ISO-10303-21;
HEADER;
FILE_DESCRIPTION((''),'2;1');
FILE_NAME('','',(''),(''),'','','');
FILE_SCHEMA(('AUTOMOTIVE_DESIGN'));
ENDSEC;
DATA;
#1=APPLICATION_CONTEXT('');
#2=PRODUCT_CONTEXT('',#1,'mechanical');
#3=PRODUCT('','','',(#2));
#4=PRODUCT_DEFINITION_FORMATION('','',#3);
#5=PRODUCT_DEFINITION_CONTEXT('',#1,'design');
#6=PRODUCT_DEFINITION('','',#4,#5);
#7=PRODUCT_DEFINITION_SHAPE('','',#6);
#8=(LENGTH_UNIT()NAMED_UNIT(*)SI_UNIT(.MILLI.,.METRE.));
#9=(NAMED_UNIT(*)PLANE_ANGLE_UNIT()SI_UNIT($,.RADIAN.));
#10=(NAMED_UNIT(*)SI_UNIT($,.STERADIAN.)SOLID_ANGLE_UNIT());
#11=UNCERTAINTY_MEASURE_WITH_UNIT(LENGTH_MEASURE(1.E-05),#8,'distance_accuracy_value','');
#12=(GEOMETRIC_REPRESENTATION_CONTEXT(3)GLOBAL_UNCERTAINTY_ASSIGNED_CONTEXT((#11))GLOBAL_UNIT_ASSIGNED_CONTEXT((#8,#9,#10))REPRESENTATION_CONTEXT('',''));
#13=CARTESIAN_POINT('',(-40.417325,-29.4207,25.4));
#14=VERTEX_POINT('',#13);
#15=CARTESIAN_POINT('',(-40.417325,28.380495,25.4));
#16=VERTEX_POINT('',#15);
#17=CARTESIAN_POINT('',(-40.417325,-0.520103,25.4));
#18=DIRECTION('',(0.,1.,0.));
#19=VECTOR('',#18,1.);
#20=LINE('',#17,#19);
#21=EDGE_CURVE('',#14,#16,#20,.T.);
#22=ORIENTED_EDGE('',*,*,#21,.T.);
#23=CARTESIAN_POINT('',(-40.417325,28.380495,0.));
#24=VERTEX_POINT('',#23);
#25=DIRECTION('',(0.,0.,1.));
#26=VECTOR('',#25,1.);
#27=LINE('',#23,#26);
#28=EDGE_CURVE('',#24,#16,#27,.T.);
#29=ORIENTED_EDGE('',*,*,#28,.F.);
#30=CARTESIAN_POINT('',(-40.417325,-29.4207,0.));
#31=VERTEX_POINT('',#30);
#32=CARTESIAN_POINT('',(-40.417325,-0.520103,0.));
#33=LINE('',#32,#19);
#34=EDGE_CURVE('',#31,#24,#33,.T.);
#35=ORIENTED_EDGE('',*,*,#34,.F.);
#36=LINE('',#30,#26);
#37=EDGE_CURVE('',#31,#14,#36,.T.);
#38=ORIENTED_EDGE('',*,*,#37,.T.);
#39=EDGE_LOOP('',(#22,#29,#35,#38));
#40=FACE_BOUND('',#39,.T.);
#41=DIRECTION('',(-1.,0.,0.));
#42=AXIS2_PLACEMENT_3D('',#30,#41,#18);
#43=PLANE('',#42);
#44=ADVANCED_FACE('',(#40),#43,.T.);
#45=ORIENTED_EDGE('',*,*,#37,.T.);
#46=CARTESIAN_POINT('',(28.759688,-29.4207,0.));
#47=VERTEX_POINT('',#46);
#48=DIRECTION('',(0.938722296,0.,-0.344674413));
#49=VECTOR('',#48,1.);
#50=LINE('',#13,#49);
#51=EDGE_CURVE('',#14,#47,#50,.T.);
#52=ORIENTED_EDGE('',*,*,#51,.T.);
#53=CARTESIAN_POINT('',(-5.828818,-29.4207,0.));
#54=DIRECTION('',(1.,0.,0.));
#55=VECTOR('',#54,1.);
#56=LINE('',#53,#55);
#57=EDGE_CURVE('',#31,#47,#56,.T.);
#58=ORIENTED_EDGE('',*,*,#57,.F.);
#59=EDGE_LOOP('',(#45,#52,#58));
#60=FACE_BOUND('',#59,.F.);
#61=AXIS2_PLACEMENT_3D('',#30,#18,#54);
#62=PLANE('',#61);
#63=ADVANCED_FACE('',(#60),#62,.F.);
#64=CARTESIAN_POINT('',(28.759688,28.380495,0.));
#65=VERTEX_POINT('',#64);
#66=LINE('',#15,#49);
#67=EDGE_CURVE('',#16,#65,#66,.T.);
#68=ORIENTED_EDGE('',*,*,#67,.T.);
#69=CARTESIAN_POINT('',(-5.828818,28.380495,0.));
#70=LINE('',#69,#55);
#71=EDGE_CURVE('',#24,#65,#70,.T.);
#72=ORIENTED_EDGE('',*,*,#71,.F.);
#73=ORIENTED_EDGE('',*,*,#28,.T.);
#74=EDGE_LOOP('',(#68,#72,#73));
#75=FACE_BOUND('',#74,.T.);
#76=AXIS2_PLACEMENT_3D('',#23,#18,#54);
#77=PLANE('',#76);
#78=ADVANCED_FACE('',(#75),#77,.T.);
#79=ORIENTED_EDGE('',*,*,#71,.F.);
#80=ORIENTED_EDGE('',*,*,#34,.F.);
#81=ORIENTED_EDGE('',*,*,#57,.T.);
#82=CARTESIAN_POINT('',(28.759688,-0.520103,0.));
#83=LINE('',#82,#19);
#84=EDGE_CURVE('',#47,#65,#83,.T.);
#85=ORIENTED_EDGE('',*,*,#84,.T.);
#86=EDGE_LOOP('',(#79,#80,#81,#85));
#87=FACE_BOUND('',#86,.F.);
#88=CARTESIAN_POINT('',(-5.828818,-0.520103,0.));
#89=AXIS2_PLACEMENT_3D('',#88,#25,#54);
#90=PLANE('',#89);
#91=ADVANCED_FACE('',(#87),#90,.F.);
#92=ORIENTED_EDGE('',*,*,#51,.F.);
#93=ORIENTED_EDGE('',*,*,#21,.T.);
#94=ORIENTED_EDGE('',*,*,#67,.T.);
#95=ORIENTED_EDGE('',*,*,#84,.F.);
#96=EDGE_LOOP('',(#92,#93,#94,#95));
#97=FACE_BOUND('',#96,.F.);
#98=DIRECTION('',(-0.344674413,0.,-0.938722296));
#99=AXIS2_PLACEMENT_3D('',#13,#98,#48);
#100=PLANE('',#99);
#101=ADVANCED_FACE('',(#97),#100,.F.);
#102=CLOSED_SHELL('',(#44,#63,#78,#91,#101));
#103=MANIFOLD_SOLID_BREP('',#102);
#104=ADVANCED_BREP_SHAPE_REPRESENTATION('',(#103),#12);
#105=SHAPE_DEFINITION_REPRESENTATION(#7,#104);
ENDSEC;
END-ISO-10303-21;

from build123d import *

# Parameters (mm, degrees)
F0_W     = 69.1770128906
F0_H     = 57.801194489
F1_DEPTH = 25.4
F3_DEPTH = 57.801194489


# Not quite as in the source:
# - the program builds the solid bodies; features that only make, move or delete a surface that nothing else refers to are left out


with BuildPart() as f1:
    # F0 (on Top) → F1 (new body)
    with BuildSketch(Plane.XY):
        with Locations((-5.8288183063, -0.5201026797)):
            Rectangle(F0_W, F0_H)
    extrude(amount=F1_DEPTH)

    # F2 (on face) → F3 (cut, through all)
    with BuildSketch(Plane.XZ.offset(29.4206999242)):
        Polygon((28.759688139, 25.4), (-40.4173247516, 25.4), (28.759688139, 0), align=None)
    extrude(amount=-F3_DEPTH, mode=Mode.SUBTRACT)


solid = f1.part
